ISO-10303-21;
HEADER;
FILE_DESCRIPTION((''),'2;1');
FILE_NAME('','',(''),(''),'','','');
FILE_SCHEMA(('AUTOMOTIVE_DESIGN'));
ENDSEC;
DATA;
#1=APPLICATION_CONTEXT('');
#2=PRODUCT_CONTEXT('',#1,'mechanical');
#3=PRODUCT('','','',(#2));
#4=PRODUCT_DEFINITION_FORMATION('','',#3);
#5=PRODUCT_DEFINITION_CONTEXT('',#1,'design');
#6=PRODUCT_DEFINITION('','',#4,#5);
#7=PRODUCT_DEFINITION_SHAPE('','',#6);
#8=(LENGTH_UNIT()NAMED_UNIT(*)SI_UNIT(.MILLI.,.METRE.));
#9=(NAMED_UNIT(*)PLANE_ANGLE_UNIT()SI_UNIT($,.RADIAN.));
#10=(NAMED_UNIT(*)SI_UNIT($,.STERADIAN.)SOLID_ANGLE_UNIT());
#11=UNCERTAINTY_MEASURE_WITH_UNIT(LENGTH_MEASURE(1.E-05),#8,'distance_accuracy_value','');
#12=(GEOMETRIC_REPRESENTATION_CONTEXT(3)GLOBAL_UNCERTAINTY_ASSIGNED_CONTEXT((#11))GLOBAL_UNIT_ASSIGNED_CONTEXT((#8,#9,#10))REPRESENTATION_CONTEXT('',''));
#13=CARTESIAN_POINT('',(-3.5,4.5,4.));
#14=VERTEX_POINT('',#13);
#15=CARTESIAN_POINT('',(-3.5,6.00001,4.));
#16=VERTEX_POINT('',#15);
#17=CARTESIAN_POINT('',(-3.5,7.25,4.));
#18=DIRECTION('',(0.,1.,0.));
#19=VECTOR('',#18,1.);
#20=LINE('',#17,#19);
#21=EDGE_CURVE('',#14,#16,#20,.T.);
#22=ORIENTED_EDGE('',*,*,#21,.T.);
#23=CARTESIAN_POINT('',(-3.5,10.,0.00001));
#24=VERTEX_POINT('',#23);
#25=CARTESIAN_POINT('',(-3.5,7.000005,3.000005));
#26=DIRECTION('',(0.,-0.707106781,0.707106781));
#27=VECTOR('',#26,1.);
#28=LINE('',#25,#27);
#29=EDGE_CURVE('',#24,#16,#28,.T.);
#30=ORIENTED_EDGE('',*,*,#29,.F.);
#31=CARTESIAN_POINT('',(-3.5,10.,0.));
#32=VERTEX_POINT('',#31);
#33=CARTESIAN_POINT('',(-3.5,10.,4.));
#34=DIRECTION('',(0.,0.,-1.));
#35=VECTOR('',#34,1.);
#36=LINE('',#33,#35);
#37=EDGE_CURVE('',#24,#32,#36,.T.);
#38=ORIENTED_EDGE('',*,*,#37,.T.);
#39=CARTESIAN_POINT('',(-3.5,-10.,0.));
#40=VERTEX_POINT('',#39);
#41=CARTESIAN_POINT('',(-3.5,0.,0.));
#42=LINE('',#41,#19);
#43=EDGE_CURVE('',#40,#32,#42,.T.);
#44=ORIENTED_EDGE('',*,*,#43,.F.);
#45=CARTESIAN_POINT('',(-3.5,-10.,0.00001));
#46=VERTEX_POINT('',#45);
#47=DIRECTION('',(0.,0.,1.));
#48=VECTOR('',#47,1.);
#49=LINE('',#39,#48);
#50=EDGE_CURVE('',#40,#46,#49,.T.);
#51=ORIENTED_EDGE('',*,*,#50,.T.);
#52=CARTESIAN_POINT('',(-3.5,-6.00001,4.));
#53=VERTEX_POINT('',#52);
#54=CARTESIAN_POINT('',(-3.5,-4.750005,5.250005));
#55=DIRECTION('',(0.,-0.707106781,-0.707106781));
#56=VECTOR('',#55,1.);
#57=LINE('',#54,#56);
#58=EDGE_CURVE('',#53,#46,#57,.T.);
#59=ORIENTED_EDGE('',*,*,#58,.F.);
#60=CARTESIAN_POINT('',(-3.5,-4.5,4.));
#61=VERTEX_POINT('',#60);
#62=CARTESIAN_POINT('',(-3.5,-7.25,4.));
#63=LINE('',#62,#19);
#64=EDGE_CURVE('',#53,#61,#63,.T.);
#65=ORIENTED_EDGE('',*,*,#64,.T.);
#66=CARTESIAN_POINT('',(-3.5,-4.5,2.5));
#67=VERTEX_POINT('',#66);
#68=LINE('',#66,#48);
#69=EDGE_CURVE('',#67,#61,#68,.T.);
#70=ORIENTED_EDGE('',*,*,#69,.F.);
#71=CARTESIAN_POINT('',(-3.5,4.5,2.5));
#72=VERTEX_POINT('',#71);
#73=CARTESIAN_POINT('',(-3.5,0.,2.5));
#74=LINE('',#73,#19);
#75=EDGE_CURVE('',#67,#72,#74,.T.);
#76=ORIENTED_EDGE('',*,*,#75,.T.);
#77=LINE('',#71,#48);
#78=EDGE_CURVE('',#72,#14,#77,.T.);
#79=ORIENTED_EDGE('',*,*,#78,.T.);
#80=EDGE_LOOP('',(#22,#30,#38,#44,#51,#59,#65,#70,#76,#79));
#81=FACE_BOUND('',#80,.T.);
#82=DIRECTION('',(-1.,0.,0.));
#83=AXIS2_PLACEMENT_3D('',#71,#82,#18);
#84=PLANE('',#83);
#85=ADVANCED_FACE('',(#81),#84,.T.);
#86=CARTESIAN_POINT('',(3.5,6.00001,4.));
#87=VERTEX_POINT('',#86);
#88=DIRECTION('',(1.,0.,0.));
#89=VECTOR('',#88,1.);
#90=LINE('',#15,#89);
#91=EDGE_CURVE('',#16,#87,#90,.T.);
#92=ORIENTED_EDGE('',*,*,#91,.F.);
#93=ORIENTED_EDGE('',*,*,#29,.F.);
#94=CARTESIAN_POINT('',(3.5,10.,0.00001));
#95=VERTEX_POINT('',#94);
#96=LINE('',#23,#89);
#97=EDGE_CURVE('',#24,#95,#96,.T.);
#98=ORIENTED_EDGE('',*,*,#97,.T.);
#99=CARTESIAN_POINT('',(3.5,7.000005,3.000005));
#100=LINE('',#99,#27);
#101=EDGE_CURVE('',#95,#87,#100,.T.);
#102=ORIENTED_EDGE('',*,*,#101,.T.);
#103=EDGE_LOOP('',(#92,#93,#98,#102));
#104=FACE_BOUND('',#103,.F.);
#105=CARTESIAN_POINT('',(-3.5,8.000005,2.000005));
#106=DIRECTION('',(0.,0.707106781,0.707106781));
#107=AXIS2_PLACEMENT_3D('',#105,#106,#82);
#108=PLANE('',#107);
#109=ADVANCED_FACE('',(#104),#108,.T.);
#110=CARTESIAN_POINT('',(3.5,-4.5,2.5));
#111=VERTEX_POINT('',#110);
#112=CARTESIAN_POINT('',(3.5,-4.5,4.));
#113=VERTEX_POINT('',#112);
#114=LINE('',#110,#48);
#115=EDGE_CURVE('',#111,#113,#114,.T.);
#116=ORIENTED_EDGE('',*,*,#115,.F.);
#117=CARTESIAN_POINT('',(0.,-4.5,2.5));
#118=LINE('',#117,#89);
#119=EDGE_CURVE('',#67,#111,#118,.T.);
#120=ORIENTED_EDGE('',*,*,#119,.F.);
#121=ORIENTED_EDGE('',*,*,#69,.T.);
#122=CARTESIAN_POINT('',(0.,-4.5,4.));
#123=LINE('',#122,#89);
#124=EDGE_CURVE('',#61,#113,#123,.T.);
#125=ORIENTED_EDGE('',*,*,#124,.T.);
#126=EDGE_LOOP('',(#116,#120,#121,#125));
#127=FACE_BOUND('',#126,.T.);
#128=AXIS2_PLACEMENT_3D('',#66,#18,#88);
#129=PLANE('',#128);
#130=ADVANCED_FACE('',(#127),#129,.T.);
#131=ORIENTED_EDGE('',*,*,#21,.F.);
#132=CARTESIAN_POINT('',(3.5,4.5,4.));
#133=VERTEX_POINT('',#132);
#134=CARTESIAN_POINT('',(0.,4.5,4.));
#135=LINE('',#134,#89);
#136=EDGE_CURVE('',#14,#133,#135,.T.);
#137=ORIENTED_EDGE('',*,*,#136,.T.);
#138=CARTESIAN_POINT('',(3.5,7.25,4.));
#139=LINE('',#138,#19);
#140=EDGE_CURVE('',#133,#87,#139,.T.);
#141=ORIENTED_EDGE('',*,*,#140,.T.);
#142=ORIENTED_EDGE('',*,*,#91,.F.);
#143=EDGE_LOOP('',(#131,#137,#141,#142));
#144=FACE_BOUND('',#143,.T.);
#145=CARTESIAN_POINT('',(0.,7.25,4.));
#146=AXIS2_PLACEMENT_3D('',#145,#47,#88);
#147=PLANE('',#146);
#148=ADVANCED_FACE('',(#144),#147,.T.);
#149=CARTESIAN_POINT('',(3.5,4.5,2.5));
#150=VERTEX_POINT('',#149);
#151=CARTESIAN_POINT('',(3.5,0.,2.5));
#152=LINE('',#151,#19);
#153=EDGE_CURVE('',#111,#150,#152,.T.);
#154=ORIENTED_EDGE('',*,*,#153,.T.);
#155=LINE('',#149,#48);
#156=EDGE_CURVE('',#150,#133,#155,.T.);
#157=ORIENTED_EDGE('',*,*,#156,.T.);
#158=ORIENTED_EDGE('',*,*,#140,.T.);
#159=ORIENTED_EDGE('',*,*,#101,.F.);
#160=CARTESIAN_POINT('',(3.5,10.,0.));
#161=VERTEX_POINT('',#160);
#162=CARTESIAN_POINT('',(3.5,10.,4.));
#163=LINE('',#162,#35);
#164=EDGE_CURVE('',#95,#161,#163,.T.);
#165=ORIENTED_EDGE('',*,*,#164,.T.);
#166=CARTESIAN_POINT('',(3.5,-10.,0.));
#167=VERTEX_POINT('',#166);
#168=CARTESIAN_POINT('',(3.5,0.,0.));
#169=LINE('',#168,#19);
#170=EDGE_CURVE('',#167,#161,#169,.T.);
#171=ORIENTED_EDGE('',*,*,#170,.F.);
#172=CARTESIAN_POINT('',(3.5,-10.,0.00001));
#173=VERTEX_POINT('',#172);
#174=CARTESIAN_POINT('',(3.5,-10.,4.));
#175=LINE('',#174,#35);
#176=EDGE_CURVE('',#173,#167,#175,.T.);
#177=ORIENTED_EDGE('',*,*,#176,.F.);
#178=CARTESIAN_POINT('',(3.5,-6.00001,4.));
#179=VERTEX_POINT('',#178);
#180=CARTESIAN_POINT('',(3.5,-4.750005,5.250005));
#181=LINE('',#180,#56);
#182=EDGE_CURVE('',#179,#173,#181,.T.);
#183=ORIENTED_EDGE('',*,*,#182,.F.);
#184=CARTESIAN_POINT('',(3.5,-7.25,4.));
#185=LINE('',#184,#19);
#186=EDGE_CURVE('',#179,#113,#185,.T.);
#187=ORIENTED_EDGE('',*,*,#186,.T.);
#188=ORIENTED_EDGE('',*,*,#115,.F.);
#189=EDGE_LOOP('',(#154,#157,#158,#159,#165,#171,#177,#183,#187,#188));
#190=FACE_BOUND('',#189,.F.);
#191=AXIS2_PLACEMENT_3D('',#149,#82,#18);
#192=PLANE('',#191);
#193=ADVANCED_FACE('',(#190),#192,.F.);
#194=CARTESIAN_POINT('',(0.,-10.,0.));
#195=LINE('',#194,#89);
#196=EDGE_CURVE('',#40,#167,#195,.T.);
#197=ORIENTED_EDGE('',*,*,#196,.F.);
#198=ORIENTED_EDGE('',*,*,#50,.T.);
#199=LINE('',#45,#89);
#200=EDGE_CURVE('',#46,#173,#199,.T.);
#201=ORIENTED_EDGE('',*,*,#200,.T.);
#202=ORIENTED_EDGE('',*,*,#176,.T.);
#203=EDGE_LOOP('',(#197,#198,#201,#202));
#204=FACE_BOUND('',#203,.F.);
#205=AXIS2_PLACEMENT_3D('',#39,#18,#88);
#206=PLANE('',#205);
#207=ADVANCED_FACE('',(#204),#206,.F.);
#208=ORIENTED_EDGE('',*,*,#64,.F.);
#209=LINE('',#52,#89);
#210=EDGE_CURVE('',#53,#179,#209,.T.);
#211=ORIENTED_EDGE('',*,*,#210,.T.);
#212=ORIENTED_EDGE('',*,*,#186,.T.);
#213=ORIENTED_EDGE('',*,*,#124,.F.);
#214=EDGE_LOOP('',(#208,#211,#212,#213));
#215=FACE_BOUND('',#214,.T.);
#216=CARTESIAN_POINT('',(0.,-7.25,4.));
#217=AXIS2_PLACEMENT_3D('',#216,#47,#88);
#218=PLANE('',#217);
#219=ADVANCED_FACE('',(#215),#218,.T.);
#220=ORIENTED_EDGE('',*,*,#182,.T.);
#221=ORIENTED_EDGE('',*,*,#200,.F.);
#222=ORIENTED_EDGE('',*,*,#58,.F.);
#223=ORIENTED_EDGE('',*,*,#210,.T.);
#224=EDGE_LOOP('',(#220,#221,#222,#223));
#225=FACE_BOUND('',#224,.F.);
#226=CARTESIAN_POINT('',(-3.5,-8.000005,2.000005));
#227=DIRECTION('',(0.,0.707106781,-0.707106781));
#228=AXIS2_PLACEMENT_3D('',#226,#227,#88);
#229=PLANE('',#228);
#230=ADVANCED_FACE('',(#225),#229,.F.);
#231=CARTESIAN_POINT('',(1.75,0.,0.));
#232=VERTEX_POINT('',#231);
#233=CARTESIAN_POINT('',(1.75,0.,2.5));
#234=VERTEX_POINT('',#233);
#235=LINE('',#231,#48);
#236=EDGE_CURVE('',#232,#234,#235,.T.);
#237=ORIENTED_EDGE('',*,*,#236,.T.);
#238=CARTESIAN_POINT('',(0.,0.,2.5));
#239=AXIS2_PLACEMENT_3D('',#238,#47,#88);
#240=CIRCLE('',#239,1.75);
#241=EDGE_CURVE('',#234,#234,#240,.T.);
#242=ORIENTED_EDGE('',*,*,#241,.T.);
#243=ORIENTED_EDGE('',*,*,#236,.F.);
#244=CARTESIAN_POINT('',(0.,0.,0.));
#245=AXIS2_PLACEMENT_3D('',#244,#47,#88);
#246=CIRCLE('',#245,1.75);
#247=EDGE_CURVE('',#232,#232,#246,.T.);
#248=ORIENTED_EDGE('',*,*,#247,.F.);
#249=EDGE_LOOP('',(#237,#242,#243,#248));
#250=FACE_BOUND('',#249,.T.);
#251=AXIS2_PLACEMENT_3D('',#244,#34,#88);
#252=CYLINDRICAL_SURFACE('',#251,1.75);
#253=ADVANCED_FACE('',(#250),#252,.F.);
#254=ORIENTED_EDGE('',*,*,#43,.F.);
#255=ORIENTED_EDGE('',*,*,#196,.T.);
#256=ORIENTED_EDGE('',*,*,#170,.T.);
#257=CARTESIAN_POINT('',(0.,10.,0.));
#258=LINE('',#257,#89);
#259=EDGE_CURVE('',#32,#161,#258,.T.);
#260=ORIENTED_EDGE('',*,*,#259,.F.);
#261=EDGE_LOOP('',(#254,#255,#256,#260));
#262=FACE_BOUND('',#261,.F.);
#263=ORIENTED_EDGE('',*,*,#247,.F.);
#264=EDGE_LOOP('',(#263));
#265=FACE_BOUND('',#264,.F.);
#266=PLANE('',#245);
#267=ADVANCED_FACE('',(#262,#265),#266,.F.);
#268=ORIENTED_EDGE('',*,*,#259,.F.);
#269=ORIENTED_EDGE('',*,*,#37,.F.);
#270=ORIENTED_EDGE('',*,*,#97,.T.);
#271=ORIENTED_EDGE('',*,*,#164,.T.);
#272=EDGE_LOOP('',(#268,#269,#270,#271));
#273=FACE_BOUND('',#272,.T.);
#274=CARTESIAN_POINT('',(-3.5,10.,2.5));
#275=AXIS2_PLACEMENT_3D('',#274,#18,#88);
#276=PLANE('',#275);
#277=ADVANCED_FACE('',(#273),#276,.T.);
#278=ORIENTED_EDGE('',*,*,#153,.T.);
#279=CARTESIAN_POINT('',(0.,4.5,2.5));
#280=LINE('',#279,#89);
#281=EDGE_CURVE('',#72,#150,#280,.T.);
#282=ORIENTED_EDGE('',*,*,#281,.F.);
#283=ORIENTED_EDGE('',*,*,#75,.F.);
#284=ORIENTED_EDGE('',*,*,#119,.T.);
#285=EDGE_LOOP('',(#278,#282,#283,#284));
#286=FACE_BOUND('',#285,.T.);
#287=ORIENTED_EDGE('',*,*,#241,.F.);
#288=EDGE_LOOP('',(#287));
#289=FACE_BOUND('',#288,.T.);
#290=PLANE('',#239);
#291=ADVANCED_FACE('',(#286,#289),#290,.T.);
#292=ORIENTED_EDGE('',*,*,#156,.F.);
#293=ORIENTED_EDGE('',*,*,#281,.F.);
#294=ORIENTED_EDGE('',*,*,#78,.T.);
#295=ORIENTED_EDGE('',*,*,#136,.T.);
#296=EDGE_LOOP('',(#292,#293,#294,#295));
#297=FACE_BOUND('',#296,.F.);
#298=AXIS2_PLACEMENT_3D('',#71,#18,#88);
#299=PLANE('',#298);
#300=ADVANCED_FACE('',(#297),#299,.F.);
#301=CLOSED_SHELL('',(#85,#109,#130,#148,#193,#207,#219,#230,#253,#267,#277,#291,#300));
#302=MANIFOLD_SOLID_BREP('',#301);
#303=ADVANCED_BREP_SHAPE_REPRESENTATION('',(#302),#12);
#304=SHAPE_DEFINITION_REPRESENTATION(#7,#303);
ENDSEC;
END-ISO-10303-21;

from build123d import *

# Parameters (mm, degrees)
F0_W     = 7
F0_H     = 20
F0_R     = 1.75
F1_DEPTH = 2.5
F2_W     = 7
F2_H     = 5.5
F3_DEPTH = 1.5
F4_SIZE  = 3.99999


# Not quite as in the source:
# - a fillet or chamfer is up to 0.001 mm smaller than in the source, because OpenCascade refuses the exact size


with BuildPart() as f1:
    # F0 (on Top) → F1 (new body)
    with BuildSketch(Plane.XY):
        Rectangle(F0_W, F0_H)
        Circle(F0_R, mode=Mode.SUBTRACT)
    extrude(amount=F1_DEPTH)

    # F2 (on face) → F3 (join)
    with BuildSketch(Plane.XY.offset(2.5)):
        with Locations((0, 7.25)):
            Rectangle(F2_W, F2_H)
        with Locations((0, -7.25)):
            Rectangle(F2_W, F2_H)
    extrude(amount=F3_DEPTH)

    # F4 (size 4 in the source; OpenCascade refuses exactly that, so slightly less here)
    f4_edges = [f1.edges().sort_by_distance(p)[0] for p in [
        (0, 10, 4),
        (0, -10, 4),
    ]]
    chamfer(f4_edges, length=F4_SIZE)


solid = f1.part
